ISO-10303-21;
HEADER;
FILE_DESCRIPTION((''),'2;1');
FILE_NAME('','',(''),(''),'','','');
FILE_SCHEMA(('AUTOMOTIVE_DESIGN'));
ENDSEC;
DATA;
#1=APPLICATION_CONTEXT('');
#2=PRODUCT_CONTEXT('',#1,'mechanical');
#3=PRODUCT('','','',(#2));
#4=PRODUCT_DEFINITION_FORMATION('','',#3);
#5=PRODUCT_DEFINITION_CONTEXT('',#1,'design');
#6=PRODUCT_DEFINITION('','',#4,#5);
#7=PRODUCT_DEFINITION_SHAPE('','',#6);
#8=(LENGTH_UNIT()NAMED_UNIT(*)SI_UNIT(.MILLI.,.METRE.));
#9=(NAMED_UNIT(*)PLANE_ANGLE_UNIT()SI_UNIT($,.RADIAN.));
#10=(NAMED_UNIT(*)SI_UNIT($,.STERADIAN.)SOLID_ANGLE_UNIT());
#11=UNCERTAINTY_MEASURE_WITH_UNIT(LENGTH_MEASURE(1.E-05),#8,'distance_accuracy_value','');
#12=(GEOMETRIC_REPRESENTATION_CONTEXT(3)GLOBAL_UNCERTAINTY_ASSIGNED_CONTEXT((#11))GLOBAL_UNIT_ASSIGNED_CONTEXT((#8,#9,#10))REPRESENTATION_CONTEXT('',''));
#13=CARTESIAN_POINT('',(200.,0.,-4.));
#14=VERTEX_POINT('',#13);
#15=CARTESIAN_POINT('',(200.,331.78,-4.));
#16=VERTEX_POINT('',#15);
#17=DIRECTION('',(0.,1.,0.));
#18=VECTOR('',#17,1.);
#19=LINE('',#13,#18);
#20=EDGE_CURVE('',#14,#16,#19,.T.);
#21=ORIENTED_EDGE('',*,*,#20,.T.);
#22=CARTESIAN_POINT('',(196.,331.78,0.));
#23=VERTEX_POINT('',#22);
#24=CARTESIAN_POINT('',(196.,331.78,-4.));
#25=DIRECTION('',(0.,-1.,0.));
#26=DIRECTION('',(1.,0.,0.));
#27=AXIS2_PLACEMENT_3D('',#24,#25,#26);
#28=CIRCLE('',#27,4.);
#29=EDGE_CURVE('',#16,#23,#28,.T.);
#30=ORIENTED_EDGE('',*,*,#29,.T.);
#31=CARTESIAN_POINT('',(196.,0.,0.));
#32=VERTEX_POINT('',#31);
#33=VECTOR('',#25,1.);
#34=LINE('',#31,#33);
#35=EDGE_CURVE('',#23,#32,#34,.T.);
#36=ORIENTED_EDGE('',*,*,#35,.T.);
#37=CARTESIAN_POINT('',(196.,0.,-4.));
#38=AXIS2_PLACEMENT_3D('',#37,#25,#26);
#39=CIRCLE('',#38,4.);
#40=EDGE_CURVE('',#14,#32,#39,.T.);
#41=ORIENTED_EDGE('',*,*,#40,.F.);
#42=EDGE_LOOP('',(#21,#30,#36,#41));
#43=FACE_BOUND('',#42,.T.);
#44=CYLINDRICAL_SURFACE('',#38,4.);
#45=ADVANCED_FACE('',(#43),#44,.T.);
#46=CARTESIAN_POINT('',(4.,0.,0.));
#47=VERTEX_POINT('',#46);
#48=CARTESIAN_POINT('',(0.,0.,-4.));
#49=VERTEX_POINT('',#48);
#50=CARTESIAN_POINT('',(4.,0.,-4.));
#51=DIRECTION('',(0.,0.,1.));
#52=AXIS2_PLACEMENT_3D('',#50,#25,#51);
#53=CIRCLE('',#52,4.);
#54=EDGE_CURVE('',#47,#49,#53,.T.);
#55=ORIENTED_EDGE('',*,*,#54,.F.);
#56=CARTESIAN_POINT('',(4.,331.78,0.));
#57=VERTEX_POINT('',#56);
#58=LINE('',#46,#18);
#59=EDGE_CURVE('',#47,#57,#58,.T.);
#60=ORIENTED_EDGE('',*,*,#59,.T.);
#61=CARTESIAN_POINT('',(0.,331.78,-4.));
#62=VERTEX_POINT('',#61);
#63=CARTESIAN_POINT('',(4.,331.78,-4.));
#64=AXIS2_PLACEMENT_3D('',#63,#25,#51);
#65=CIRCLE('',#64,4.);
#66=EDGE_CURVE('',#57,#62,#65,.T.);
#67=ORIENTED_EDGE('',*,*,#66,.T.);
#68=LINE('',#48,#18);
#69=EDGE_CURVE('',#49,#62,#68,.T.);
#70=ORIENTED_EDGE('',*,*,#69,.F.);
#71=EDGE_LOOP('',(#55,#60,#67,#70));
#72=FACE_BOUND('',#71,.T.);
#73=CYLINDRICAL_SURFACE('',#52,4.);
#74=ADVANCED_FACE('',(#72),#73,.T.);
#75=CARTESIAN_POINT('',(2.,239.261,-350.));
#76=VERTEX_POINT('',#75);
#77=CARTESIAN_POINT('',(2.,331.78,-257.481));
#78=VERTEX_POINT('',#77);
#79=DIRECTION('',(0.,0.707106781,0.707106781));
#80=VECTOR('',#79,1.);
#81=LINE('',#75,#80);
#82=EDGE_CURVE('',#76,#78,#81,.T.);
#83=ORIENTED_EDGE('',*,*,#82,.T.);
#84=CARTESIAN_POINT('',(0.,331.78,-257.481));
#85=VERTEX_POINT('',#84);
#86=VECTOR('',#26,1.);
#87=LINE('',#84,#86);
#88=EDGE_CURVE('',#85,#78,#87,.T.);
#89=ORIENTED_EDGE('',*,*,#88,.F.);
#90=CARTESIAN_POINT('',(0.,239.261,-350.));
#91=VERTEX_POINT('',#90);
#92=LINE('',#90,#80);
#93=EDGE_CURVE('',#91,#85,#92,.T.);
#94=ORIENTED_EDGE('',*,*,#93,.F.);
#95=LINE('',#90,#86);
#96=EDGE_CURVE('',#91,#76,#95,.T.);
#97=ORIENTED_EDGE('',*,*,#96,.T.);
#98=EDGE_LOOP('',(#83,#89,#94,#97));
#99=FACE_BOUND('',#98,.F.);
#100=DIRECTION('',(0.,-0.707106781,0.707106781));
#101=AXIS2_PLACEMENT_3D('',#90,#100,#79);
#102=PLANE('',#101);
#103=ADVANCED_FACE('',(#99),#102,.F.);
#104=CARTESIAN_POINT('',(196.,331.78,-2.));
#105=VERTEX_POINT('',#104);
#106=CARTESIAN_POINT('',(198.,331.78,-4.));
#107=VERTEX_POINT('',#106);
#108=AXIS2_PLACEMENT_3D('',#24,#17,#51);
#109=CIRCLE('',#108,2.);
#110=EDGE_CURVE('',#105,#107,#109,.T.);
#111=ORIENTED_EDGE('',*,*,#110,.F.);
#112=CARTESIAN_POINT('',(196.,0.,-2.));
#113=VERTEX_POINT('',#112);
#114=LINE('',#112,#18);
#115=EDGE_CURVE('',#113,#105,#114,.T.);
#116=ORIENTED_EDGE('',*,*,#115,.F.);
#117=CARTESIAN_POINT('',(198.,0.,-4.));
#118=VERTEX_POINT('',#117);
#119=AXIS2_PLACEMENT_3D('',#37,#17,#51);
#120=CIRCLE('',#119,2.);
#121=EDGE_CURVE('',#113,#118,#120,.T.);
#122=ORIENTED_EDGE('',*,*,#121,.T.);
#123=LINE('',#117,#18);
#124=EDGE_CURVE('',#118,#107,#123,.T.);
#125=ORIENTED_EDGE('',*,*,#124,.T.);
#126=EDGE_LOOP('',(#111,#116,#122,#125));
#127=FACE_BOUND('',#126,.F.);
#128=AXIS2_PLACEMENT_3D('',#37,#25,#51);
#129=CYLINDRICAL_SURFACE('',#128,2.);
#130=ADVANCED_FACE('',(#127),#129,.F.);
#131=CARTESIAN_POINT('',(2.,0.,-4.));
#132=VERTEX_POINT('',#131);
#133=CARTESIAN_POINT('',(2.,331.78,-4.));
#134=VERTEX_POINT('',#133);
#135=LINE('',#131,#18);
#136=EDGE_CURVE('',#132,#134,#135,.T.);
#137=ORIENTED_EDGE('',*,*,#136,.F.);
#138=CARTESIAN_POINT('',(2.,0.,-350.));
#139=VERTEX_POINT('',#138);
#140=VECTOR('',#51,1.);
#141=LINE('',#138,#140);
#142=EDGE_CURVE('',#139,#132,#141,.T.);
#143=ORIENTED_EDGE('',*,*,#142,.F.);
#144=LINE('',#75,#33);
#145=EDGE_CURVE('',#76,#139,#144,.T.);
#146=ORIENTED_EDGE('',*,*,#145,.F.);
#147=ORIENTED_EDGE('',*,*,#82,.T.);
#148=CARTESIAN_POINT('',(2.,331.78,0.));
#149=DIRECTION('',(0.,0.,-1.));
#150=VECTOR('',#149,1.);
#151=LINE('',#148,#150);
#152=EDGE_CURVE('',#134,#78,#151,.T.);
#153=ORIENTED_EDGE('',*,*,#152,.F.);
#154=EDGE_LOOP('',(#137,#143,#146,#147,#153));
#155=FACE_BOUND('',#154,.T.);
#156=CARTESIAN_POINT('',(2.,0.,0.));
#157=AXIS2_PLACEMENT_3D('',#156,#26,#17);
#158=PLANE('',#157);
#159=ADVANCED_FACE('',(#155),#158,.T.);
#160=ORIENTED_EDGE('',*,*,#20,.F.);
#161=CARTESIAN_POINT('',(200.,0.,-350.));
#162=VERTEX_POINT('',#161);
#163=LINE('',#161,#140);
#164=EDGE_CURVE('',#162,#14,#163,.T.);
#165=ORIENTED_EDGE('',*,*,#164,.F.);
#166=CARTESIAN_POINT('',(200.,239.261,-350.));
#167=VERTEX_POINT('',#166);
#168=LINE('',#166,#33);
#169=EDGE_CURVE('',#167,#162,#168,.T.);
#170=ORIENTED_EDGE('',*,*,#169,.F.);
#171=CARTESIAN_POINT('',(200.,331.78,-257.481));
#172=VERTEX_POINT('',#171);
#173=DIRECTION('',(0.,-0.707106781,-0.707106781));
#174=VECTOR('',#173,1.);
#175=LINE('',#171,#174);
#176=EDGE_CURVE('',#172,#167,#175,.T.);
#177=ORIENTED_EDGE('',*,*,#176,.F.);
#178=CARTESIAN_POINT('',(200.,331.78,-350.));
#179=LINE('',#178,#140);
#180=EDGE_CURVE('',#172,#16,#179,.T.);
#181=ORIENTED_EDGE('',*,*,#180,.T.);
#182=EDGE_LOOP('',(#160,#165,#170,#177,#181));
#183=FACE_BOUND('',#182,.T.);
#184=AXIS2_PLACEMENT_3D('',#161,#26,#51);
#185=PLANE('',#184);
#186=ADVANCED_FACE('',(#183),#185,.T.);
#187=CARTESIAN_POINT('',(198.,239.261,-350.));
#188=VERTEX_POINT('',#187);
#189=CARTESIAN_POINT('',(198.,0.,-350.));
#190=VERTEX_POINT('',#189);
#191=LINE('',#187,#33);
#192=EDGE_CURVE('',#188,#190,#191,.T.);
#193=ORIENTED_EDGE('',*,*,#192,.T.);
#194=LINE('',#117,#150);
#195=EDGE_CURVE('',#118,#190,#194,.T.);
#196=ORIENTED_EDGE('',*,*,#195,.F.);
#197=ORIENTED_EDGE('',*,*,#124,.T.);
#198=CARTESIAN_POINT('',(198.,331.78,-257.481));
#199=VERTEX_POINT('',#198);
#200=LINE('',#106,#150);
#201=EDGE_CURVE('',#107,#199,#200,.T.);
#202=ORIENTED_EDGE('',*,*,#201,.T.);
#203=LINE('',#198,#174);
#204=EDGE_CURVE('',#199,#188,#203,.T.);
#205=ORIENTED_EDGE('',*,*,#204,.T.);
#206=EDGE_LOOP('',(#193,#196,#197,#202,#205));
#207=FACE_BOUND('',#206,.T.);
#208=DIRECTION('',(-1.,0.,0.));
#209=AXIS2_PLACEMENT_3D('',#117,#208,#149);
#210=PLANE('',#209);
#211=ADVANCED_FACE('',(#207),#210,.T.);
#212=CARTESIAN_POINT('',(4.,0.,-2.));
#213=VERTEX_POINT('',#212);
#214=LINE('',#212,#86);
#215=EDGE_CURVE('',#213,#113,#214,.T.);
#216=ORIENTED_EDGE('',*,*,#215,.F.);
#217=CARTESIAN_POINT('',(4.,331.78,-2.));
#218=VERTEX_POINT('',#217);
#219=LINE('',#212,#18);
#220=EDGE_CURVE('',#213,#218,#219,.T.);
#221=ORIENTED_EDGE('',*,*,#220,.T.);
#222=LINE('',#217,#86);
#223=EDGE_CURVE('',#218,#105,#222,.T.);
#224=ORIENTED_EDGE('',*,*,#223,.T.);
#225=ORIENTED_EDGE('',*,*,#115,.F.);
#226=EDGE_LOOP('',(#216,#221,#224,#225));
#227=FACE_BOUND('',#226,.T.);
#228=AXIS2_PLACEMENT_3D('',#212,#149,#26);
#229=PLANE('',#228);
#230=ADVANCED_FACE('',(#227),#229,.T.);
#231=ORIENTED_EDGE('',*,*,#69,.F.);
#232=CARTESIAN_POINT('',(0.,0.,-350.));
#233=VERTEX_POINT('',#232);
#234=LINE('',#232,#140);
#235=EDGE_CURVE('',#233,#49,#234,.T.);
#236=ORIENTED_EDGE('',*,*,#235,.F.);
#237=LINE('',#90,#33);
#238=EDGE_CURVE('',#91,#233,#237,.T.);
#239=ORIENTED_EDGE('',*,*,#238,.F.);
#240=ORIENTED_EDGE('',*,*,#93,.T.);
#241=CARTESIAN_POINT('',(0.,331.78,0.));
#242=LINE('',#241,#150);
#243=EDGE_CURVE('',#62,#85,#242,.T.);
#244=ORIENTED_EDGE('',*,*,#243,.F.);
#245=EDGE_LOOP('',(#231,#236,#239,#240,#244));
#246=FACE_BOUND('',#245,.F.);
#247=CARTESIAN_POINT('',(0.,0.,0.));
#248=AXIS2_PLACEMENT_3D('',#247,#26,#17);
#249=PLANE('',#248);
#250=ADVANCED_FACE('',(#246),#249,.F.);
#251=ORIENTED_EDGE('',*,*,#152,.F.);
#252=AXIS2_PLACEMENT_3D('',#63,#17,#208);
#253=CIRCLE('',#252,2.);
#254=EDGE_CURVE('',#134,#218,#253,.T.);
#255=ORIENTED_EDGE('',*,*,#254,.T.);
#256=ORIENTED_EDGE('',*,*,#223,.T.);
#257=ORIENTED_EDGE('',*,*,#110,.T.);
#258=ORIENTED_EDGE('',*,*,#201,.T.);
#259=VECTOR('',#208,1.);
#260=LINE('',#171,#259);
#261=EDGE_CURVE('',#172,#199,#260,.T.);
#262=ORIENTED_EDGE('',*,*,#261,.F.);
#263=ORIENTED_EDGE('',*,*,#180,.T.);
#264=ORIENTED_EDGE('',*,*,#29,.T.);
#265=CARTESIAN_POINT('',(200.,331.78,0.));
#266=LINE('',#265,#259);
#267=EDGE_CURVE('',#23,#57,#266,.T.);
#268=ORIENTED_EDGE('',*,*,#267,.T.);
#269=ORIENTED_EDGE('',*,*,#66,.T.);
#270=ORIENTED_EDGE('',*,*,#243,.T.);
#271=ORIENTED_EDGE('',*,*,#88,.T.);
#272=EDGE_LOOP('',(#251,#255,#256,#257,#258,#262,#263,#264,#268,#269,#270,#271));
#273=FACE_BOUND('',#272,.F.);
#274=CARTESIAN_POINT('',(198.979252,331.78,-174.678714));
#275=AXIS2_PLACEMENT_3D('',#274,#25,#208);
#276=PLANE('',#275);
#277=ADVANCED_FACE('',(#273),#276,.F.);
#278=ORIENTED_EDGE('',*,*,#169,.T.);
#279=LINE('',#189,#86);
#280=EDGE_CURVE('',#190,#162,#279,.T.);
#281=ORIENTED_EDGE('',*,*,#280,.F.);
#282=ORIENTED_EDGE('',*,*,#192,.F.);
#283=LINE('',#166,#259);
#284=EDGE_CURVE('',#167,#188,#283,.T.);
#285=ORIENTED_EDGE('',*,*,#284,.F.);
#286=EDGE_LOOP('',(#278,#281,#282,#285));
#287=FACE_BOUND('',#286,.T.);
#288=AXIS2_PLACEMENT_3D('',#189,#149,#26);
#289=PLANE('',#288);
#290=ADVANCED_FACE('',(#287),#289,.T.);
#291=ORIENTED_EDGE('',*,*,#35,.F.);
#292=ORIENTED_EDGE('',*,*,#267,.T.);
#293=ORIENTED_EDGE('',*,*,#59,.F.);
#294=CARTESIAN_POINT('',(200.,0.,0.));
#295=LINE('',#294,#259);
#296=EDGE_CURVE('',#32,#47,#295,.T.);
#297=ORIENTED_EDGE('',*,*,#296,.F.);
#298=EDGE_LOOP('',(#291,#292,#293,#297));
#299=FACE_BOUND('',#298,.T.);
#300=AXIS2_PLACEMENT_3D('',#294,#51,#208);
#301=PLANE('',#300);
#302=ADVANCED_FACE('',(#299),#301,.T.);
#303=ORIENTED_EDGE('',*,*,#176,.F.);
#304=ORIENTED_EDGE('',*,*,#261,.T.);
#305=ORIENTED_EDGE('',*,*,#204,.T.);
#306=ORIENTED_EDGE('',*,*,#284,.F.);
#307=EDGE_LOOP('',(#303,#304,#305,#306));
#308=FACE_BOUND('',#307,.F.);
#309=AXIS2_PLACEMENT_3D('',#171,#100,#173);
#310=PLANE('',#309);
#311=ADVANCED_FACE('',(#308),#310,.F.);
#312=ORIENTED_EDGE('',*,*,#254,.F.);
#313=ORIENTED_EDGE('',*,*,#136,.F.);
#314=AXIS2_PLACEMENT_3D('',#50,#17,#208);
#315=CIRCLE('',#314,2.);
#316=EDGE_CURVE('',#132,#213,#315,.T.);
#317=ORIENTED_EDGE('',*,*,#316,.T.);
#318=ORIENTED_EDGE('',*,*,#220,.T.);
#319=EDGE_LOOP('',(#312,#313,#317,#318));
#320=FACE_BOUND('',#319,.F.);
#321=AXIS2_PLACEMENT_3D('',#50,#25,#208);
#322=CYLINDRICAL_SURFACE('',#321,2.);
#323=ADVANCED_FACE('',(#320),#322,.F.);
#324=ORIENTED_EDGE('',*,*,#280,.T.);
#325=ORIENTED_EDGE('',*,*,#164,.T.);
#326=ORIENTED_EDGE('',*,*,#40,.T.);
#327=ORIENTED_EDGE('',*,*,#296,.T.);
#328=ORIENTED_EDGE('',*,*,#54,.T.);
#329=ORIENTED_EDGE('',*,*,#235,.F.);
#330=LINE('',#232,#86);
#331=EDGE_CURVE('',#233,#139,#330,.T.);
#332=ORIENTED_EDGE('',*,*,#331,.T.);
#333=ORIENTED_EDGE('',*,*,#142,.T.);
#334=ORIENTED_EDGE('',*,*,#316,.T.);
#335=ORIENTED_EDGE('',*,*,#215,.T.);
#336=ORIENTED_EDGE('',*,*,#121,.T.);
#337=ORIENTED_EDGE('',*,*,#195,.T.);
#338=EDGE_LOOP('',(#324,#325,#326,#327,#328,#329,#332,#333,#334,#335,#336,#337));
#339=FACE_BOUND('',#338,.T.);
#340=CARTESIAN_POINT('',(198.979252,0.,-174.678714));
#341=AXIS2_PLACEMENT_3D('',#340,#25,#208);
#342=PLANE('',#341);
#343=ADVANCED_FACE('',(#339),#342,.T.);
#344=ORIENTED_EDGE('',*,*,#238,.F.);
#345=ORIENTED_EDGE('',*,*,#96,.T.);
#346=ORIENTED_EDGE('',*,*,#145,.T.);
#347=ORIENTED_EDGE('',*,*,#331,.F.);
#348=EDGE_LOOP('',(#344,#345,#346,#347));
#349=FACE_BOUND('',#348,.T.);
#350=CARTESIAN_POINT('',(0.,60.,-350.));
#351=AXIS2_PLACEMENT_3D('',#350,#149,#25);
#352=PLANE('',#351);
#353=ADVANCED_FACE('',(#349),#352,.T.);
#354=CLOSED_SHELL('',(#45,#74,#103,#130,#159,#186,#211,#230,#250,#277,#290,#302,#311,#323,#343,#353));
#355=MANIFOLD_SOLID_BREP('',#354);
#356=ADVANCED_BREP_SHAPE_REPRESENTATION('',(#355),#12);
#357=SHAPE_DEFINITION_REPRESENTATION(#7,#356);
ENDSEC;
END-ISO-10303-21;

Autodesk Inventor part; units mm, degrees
ref_plane "YZ Plane" through (0, 0, 0) normal (1, 0, 0) x (0, 1, 0)
ref_plane "XZ Plane" through (0, 0, 0) normal (0, 1, 0) x (-1, 0, 0)
ref_plane "XY Plane" through (0, 0, 0) normal (0, 0, 1) x (1, 0, 0)
sketch "Sketch1" plane through (0, 0, 0) normal (1, 0, 0) x (0, 1, 0)
  line L0 (0, 0) -> (331.78, 0)
  line L1 (331.78, 0) -> (331.78, -350)
  line L2 (331.78, -350) -> (0, -350)
  line L3 (0, -350) -> (0, 0)
  line L4 (239.261, -350) -> (331.78, -257.481)
  line L5 (120, -350) -> (115, -350)
  line L6 (115, -350) -> (115, -353)
  line L7 (115, -353) -> (120, -353)
  line L8 (120, -353) -> (120, -350)
  line L9 (115, -353) -> (130, -353)
  line L10 (130, -353) -> (130, -358)
  line L11 (130, -358) -> (115, -358)
  line L12 (115, -358) -> (115, -353)
  line L13 (90, -350) -> (95, -350)
  line L14 (95, -350) -> (95, -353)
  line L15 (95, -353) -> (90, -353)
  line L16 (90, -353) -> (90, -350)
  line L17 (90, -353) -> (105, -353)
  line L18 (105, -353) -> (105, -358)
  line L19 (105, -358) -> (90, -358)
  line L20 (90, -358) -> (90, -353)
  line L21 (60, -350) -> (65, -350)
  line L22 (65, -350) -> (65, -353)
  line L23 (65, -353) -> (60, -353)
  line L24 (60, -353) -> (60, -350)
  line L25 (60, -353) -> (75, -353)
  line L26 (75, -353) -> (75, -358)
  line L27 (75, -358) -> (60, -358)
  line L28 (60, -358) -> (60, -353)
  point P0 (117.5, -353)
  point P1 (115, -355.5)
  point P2 (130, -355.5)
  point P3 (95, -351.5)
  point P4 (90, -351.5)
  point P5 (90, -355.5)
  point P6 (60, -351.5)
  point P7 (65, -351.5)
  dimension "d0" = 350
  dimension "d1" = 331.78
  dimension "d2" = 239.261
  dimension "d3" = 45
  dimension "d27" = 3
  dimension "d28" = 5
  dimension "d29" = 5
  dimension "d30" = 15
  dimension "d31" = 115
  dimension "d32" = 5
  dimension "d33" = 15
  dimension "d34" = 5
  dimension "d35" = 25
  dimension "d36" = 15
  dimension "d37" = 5
  dimension "d38" = 65
extrude "Plate1" add sketch "Sketch1" along normal blind 2 contours L0 L1 L4 L2 L3 | L2 L22 L23 L24 | L23 L25 L26 L27 L28 | L8 L7 L6 L2 | L2 L14 L15 L16 | L9 L10 L11 L12 L7 | L15 L17 L18 L19 L20
sketch "Sketch2" plane through (0, 0, -2) normal (0, 0, 1) x (1, 0, 0)
  line L0 (0, 331.78) -> (0, 0)
  line L1 (0, 0) -> (200, 0)
  line L2 (200, 0) -> (200, 331.78)
  line L3 (200, 331.78) -> (0, 331.78)
edge flange "Flange1" height 200 angle 90 thickness 2 bend radius 2 thickness toward (0, 0, 1) relief tear relief width 2 relief depth 1 edges at (2, 165.89, 0) wall of the first edge with corners at (0, 331.78, -2) (0, 0, -2) (200, 0, -2) (200, 331.78, -2)
bend "Bend1"
corner "Corner1"
sketch "Sketch3" plane through (198, 0, 0) normal (1, 0, 0) x (0, 1, 0)
  line L0 (331.78, 0) -> (0, 0)
  line L1 (0, 0) -> (0, -350)
  line L2 (0, -350) -> (331.78, -350)
  line L3 (331.78, -350) -> (331.78, 0)
edge flange "Flange2" height 350 angle 90 thickness 2 bend radius 2 thickness toward (1, 0, 0) relief tear relief width 2 relief depth 1 edges at (200, 165.89, -2) wall of the first edge with corners at (198, 331.78, 0) (198, 0, 0) (198, 0, -350) (198, 331.78, -350)
bend "Bend2"
corner "Corner2"
sketch "Sketch4" plane through (200, 0, -350) normal (1, 0, 0) x (0, 0, -1)
  line L0 (-92.519, 331.78) -> (0, 239.261) projected
  line L1 (-346, 331.78) -> (0, 331.78) projected
  line L2 (0, 331.78) -> (0, 0) projected
  point P0 (-350, 0)
extrude "Cut1" cut sketch "Sketch4" against normal blind 2
sketch "Sketch5" plane through (200, 0, -4) normal (1, 0, 0) x (0, 0, -1)
  line L0 (0, 331.78) -> (0, 0)
  line L1 (346, 0) -> (0, 0)
  line L2 (346, 60) -> (346, 0)
  line L3 (354, 60) -> (346, 60)
  line L4 (354, 75) -> (354, 60)
  line L5 (349, 75) -> (354, 75)
  line L6 (349, 65) -> (349, 75)
  line L7 (346, 65) -> (349, 65)
  line L8 (346, 90) -> (346, 65)
  line L9 (354, 90) -> (346, 90)
  line L10 (354, 105) -> (354, 90)
  line L11 (349, 105) -> (354, 105)
  line L12 (349, 95) -> (349, 105)
  line L13 (346, 95) -> (349, 95)
  line L14 (346, 115) -> (346, 95)
  line L15 (354, 115) -> (346, 115)
  line L16 (354, 130) -> (354, 115)
  line L17 (349, 130) -> (354, 130)
  line L18 (349, 120) -> (349, 130)
  line L19 (346, 120) -> (349, 120)
  line L20 (346, 239.261) -> (346, 120)
  line L21 (253.481, 331.78) -> (346, 239.261)
  line L22 (0, 331.78) -> (253.481, 331.78)
  line L23 (346, 239.261) -> (253.481, 331.78)
  line L24 (0, 331.78) -> (253.481, 331.78)
  line L25 (0, 331.78) -> (0, 0)
  line L26 (346, 0) -> (0, 0)
  line L27 (346, 239.261) -> (346, 0)
  line L28 (346, 120) -> (354, 120)
  line L29 (354, 120) -> (354, 115)
  line L30 (354, 115) -> (346, 115)
  line L31 (346, 115) -> (346, 120)
  line L32 (354, 90) -> (346, 90)
  line L33 (346, 95) -> (354, 95)
  line L34 (354, 95) -> (354, 90)
  line L35 (354, 90) -> (346, 90)
  line L36 (346, 90) -> (346, 95)
  line L37 (346, 65) -> (354, 65)
  line L38 (354, 65) -> (354, 60)
  line L39 (354, 60) -> (346, 60)
  line L40 (346, 60) -> (346, 65)
  line L41 (354, 65) -> (349, 65)
  line L42 (349, 65) -> (349, 75)
  line L43 (349, 75) -> (354, 75)
  line L44 (354, 75) -> (354, 65)
  line L45 (354, 95) -> (349, 95)
  line L46 (349, 95) -> (349, 105)
  line L47 (349, 105) -> (354, 105)
  line L48 (354, 105) -> (354, 95)
  line L49 (354, 120) -> (349, 120)
  line L50 (349, 120) -> (349, 130)
  line L51 (349, 130) -> (354, 130)
  line L52 (354, 130) -> (354, 120)
  point P0 (-4, 0)
  point P1 (346, 65)
  point P2 (346, 60)
  point P3 (346, 95)
  point P4 (346, 90)
  point P5 (346, 120)
  point P6 (346, 115)
sheet face with bend "Face2" sketch "Sketch5" thickness 2 toward (-1, 0, 0) bend radius 2 contours L27 L7 L37 L4 L3 | L19 L28 L16 L15 L27 | L18 L17 L16 L28 | L37 L6 L5 L4 | L27 L13 L33 L10 L9 | L12 L11 L10 L33
bend "Bend3"
sketch "Sketch6" plane through (0, 0, 0) normal (-1, 0, 0) x (0, 0, 1)
  line L0 (-4, 0) -> (-4, 331.78) projected
  line L1 (-257.481, 331.78) -> (-4, 331.78) projected
  line L2 (-350, 239.261) -> (-257.481, 331.78) projected
  line L3 (-350, 120) -> (-350, 239.261) projected
  line L4 (-353, 120) -> (-350, 120) projected
  line L5 (-353, 130) -> (-353, 120) projected
  line L6 (-358, 130) -> (-353, 130) projected
  line L7 (-358, 115) -> (-358, 130) projected
  line L8 (-350, 115) -> (-358, 115) projected
  line L9 (-350, 95) -> (-350, 115) projected
  line L10 (-353, 95) -> (-350, 95) projected
  line L11 (-353, 105) -> (-353, 95) projected
  line L12 (-358, 105) -> (-353, 105) projected
  line L13 (-358, 90) -> (-358, 105) projected
  line L14 (-350, 90) -> (-358, 90) projected
  line L15 (-350, 65) -> (-350, 90) projected
  line L16 (-353, 65) -> (-350, 65) projected
  line L17 (-353, 75) -> (-353, 65) projected
  line L18 (-358, 75) -> (-353, 75) projected
  line L19 (-358, 60) -> (-358, 75) projected
  line L20 (-350, 60) -> (-358, 60) projected
  line L21 (-350, 0) -> (-350, 60) projected
  line L22 (-4, 0) -> (-350, 0) projected
  line L23 (-350, 60) -> (-350, 120)
  line L24 (-350, 120) -> (-353, 120)
  line L25 (-353, 130) -> (-358, 130)
  line L26 (-358, 60) -> (-350, 60)
  line L27 (-358, 60) -> (-358, 130)
  point P0 (0, 0)
extrude "Extrusion1" cut sketch "Sketch6" against normal through all contours L20 L19 L18 L17 L16 L23 | L23 L8 L7 L6 L5 L4 | L14 L13 L12 L11 L10 L23
equation "\"d33\" = d30"
equation "\"d34\" = d28"
equation "\"d36\" = d33"
equation "\"d25\" = Thickness"
equation "\"d4\" = Thickness"
equation "\"d5\" = BendReliefWidth"
equation "\"d6\" = BendReliefDepth"
equation "\"d7\" = MinimumRemnant"
equation "\"d8\" = TransitionRadius"
equation "\"d11\" = BendRadius"
equation "\"d12\" = CornerReliefSize"
equation "\"d13\" = GapSize"
equation "\"d14\" = JacobiRadiusSize"
equation "\"d15\" = BendReliefWidth"
equation "\"d16\" = BendReliefDepth"
equation "\"d17\" = MinimumRemnant"
equation "\"d18\" = TransitionRadius"
equation "\"d21\" = BendRadius"
equation "\"d22\" = CornerReliefSize"
equation "\"d23\" = GapSize"
equation "\"d24\" = JacobiRadiusSize"
equation "\"d39\" = BendRadius"
equation "\"d40\" = BendReliefWidth"
equation "\"d42\" = MinimumRemnant"
equation "\"d41\" = BendReliefDepth"
equation "\"d43\" = TransitionRadius"
equation "\"d37\" = d34"
equation "\"BendRadius\" = Thickness"
equation "\"BendReliefWidth\" = Thickness"
equation "\"BendReliefDepth\" = 0.5 * Thickness"
equation "\"CornerReliefSize\" = 4 * Thickness"
equation "\"MinimumRemnant\" = 2 * Thickness"
equation "\"TransitionRadius\" = BendRadius"
equation "\"JacobiRadiusSize\" = BendRadius"
equation "\"GapSize\" = Thickness"
equation "\"Thickness\" = 2"
properties part number "LzC-StoveCover" material "Steel"
